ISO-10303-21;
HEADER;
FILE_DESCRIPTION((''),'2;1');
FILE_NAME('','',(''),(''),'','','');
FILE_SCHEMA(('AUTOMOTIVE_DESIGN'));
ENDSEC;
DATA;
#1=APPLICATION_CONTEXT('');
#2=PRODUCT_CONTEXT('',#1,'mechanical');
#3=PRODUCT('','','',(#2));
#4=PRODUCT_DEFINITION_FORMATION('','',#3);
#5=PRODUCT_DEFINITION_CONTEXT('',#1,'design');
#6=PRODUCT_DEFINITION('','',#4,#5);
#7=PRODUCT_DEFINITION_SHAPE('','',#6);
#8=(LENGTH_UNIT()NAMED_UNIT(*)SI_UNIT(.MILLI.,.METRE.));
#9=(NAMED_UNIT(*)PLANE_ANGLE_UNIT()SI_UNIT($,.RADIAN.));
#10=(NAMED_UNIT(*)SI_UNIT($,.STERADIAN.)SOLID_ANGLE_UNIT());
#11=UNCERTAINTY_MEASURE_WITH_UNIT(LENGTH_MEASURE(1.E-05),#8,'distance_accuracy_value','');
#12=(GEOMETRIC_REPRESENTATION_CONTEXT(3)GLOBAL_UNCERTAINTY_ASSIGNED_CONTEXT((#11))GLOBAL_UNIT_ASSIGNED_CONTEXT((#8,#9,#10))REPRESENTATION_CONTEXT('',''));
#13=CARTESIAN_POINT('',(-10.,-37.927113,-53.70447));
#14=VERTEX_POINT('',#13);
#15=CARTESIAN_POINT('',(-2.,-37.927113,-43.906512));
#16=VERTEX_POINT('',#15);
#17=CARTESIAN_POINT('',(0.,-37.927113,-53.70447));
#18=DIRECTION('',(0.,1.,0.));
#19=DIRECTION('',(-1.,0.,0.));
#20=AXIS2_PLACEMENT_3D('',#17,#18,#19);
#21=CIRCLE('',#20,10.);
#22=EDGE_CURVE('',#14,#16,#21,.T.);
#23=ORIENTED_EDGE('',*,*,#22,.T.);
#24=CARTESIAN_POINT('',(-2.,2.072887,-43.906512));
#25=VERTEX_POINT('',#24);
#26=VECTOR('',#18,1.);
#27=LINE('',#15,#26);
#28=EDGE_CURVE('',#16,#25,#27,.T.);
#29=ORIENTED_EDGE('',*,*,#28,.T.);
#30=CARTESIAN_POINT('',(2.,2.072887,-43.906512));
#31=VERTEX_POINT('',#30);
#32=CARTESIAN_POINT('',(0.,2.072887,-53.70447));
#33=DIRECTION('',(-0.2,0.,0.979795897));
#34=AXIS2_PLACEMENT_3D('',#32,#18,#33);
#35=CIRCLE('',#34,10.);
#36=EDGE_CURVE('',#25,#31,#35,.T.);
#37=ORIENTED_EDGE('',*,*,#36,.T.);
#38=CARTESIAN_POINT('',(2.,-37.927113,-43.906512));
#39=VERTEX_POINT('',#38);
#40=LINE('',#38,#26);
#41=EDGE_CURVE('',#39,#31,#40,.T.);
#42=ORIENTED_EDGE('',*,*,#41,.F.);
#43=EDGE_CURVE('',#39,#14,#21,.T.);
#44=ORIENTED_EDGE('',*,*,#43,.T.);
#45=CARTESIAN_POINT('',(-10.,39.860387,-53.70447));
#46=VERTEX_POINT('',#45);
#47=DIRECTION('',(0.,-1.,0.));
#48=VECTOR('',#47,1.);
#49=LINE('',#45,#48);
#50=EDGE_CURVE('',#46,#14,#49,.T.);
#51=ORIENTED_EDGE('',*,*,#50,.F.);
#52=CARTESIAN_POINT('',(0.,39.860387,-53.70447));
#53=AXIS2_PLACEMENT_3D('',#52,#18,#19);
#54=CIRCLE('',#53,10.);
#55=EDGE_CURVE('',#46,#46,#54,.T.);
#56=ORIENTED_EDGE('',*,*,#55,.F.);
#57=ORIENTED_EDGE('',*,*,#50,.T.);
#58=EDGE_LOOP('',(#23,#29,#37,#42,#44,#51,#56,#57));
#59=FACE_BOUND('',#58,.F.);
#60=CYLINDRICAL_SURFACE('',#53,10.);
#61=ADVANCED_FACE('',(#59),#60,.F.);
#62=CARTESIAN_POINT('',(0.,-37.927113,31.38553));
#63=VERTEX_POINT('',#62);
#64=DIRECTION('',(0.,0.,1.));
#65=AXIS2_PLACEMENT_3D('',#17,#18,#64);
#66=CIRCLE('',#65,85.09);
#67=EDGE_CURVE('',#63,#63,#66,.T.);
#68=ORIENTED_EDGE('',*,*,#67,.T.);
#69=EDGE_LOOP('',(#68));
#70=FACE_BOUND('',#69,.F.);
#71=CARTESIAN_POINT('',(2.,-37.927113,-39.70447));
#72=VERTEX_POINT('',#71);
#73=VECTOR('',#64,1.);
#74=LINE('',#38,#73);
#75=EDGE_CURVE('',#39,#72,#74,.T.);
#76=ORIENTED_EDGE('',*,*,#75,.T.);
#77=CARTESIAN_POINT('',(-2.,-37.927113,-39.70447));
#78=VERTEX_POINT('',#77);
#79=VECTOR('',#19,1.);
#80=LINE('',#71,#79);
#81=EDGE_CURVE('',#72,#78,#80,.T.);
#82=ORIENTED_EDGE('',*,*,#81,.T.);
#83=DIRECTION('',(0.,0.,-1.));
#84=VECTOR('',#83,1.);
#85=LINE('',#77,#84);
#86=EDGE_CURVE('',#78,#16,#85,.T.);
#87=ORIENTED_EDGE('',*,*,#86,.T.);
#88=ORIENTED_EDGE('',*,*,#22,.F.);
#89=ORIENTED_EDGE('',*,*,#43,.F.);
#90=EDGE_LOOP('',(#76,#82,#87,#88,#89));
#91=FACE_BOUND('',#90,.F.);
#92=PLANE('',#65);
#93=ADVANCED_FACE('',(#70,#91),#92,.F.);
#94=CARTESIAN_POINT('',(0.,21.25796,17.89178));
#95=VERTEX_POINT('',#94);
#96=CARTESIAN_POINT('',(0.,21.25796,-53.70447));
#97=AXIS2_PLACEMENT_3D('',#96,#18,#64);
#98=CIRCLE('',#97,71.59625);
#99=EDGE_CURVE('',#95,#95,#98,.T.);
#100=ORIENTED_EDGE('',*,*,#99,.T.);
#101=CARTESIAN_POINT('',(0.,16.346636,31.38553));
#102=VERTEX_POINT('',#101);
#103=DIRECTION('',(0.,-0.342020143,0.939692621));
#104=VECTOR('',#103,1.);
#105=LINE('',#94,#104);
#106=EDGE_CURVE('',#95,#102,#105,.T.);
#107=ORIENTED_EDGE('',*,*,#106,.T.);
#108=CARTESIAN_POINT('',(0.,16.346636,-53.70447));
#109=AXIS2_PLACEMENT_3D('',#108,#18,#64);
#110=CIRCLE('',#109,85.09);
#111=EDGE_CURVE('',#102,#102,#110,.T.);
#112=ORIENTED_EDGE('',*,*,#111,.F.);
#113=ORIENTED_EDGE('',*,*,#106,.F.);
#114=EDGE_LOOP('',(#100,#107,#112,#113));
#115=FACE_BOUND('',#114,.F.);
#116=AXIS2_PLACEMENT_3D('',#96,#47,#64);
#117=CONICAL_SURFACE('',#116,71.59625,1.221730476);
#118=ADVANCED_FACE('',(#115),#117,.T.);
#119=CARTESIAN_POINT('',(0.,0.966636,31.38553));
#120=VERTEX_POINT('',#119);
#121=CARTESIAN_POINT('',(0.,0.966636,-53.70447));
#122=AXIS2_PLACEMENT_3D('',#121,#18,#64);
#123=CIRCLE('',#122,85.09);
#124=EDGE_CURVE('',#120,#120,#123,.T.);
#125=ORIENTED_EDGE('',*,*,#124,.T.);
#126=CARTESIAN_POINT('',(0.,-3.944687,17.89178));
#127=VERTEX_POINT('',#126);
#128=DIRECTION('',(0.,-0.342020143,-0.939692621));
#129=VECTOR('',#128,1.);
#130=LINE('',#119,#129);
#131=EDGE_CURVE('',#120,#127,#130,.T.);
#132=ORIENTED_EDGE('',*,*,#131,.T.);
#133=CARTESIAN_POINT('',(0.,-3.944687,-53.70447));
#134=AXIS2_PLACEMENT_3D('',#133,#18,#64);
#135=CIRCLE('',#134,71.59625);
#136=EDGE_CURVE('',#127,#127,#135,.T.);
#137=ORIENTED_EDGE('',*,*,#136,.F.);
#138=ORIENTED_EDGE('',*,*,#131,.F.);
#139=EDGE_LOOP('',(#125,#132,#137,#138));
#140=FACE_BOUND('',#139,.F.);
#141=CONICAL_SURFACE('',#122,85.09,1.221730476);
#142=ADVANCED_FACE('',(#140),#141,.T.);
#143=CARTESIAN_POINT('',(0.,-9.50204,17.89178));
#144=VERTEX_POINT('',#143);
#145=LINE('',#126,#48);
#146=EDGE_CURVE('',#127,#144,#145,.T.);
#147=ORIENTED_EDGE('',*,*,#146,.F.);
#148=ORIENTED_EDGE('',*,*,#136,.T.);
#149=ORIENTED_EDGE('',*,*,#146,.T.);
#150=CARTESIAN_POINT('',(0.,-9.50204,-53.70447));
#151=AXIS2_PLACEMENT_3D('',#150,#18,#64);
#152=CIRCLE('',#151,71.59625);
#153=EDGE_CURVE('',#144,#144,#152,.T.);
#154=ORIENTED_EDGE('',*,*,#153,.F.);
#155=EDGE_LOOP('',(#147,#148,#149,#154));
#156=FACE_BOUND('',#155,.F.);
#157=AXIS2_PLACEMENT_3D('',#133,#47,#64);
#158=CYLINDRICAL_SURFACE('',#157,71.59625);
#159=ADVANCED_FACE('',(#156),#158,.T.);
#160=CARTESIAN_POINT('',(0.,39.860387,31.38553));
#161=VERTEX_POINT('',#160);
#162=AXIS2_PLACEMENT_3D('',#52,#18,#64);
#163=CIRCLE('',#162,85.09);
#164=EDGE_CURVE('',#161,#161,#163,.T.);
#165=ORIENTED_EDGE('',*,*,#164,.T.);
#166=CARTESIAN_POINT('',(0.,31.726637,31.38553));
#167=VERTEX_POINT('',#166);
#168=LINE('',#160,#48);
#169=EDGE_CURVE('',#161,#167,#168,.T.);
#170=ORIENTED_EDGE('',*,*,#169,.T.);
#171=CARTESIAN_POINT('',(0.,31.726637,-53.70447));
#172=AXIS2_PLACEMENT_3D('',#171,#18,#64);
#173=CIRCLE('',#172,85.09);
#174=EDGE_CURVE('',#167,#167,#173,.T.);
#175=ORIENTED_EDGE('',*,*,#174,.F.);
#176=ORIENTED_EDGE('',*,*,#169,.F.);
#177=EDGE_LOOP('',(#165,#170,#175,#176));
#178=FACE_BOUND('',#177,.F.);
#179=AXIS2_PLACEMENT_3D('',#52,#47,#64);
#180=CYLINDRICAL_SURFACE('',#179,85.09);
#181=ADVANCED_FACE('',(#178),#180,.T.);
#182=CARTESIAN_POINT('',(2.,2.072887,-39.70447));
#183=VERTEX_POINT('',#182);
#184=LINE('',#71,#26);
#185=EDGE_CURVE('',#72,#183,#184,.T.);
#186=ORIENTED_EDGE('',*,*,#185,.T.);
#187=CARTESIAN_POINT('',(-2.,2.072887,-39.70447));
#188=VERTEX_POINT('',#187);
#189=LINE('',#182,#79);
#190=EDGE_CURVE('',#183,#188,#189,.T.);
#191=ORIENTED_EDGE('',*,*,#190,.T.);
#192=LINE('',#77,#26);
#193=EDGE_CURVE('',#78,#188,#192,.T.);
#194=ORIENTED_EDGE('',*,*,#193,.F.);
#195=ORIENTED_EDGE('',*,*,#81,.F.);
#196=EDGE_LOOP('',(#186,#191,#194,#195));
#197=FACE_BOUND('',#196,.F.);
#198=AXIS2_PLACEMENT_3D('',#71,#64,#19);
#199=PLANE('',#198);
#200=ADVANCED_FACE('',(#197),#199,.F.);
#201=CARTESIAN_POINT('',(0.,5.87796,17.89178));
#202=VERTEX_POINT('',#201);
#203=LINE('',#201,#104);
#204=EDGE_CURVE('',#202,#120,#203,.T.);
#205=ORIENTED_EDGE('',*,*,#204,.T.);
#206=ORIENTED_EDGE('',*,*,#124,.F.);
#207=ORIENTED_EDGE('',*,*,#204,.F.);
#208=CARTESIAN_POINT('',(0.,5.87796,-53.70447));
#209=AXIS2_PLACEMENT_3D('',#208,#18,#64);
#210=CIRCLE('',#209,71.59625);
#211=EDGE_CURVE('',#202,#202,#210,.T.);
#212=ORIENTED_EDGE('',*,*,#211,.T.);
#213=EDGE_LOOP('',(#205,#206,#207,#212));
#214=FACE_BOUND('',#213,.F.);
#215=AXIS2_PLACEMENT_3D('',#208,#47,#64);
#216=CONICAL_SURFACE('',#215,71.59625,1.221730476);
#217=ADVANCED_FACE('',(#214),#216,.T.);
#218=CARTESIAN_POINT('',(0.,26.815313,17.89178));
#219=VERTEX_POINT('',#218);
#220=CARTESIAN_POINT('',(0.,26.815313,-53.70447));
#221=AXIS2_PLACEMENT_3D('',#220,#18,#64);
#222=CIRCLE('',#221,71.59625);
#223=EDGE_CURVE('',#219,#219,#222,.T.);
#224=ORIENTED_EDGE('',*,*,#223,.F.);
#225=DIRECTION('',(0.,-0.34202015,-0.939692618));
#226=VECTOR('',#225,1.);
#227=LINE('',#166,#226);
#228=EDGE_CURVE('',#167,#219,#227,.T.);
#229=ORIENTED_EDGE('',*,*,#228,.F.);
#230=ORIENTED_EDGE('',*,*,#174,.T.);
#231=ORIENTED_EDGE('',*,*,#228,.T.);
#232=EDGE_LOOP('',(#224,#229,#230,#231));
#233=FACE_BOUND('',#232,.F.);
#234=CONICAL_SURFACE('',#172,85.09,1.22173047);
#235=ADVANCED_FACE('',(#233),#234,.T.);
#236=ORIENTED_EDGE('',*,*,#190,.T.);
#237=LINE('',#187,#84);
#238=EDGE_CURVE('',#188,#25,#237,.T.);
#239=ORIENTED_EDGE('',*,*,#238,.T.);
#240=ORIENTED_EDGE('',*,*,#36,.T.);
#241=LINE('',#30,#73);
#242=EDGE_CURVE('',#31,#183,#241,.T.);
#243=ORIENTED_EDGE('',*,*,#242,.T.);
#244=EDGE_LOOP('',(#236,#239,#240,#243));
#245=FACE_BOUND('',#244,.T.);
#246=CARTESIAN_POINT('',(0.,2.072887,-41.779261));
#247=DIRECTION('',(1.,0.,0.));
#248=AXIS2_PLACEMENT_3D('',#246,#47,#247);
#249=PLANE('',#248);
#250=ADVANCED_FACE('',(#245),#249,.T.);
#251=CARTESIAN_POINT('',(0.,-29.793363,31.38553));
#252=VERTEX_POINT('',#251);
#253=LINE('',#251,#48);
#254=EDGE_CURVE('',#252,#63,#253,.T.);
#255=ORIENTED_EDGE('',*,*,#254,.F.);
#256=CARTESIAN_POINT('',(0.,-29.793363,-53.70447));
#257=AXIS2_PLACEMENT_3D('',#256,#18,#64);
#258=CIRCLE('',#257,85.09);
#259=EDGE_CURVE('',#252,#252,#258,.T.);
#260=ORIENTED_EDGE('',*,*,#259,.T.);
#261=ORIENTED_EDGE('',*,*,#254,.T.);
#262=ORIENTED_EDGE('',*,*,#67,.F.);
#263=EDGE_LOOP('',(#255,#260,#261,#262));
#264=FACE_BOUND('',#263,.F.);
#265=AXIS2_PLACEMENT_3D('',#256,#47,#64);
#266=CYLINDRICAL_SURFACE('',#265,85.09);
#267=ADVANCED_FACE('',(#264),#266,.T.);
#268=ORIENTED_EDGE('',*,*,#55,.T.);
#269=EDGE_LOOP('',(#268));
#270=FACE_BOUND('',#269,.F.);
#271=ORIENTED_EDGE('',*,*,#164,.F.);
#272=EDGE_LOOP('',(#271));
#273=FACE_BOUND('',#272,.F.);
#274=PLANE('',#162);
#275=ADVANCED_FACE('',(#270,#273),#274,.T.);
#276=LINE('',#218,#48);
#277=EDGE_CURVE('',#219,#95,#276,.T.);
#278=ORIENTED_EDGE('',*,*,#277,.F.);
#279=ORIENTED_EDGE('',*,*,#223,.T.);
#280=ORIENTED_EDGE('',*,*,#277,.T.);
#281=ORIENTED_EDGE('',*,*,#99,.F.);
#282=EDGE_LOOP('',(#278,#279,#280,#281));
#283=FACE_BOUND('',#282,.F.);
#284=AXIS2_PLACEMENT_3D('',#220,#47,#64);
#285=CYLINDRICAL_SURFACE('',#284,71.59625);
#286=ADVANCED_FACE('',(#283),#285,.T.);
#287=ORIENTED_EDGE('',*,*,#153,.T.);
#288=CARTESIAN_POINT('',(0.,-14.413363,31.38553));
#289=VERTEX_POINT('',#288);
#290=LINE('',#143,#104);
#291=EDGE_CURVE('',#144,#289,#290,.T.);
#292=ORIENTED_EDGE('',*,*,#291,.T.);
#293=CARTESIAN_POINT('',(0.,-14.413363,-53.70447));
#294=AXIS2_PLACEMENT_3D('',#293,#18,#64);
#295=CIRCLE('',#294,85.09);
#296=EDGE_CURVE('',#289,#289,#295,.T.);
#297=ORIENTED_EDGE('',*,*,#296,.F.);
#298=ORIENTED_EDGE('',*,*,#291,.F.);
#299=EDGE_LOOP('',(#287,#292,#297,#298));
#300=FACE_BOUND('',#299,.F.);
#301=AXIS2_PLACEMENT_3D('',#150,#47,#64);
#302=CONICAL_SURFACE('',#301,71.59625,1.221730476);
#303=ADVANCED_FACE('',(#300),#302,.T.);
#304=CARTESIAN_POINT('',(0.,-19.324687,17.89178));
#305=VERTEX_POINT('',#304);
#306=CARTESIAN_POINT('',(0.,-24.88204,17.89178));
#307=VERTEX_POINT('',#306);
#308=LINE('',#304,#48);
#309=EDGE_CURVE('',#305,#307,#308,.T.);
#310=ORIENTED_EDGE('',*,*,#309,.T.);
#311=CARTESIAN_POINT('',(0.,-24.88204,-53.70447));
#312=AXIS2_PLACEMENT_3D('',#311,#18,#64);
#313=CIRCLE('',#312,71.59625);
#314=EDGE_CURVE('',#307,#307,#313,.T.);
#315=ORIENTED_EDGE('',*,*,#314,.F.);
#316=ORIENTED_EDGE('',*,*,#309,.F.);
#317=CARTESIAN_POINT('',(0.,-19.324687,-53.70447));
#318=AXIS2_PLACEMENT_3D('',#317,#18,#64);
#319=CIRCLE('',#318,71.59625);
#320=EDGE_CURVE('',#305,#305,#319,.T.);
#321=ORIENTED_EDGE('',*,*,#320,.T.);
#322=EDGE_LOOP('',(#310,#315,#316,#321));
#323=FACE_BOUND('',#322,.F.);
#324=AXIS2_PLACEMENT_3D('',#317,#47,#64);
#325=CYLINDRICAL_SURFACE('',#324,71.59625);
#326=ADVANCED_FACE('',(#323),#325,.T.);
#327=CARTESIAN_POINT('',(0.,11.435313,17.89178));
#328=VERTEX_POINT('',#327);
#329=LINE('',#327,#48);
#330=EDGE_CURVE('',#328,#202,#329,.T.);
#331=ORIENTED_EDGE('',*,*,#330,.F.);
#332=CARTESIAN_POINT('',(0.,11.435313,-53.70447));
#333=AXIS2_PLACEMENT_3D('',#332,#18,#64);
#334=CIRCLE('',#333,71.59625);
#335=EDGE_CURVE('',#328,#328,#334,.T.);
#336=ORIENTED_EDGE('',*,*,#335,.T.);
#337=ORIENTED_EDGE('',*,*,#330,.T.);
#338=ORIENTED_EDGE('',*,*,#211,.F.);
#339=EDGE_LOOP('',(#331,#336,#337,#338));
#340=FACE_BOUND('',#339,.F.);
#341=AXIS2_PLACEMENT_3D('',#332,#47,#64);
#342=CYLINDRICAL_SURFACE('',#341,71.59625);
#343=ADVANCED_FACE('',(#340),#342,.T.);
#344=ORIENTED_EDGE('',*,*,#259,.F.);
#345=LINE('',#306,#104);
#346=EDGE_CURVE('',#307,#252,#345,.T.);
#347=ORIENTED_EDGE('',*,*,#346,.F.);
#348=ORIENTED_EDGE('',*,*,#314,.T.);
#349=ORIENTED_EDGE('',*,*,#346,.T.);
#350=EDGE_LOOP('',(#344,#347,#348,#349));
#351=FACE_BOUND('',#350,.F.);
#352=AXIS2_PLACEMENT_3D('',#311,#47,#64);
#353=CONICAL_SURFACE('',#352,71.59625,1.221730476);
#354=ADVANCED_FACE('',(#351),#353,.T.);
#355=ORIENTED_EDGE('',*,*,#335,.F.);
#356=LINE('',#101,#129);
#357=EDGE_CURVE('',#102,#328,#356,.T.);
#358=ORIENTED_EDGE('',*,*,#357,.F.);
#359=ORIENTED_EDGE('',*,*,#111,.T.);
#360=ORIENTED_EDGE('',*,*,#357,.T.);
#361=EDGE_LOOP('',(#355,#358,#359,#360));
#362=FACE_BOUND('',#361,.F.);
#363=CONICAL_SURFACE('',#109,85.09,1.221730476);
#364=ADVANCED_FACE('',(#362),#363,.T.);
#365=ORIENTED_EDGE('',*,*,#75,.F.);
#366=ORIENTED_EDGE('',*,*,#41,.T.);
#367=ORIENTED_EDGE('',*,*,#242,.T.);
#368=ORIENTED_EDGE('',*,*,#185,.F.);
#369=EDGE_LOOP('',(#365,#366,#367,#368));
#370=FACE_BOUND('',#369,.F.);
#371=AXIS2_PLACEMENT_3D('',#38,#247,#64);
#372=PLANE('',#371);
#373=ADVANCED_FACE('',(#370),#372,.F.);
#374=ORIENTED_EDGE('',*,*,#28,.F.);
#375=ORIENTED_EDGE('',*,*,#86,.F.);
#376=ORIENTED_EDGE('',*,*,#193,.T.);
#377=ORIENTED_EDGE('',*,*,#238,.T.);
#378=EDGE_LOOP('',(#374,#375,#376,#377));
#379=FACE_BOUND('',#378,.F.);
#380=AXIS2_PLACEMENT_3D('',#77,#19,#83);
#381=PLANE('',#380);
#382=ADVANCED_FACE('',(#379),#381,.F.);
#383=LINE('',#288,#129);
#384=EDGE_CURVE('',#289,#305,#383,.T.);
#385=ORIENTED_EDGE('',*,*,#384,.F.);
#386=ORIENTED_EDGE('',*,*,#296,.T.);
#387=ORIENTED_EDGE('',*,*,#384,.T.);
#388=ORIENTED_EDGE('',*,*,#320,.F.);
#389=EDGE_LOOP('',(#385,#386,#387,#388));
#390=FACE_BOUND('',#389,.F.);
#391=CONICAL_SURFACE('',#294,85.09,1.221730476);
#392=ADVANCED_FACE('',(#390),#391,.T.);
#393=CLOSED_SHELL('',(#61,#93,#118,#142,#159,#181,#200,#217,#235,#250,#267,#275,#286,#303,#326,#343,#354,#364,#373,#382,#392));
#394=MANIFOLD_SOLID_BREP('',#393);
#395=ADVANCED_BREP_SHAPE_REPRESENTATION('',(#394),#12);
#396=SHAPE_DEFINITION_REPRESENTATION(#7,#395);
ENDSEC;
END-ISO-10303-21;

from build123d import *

# Parameters (mm, degrees)
F2_R     = 10
F3_DEPTH = 77.978
F5_DEPTH = 40


# Not quite as in the source:
# - ends of sketch curves that miss each other by under 0.0002 mm in the source are joined


with BuildPart() as f1:
    # F0 (on Right) → F1 (revolve)
    with BuildSketch(Plane.YZ):
        Polygon((-29.7933634734, 31.385529514), (-37.9271134734, 31.385529514), (-37.9271134734, -53.704470486), (-29.7933634734, -53.704470486), (31.7266365266, -53.704470486), (39.8603865266, -53.704470486), (39.8603865266, 31.385529514), (31.7266365266, 31.385529514), (26.815313074, 17.891779514), (21.2579597972, 17.891779514), (16.3466364486, 31.385529514), (11.4353131, 17.891779514), (5.8779598232, 17.891779514), (0.9666364746, 31.385529514), (-3.944686874, 17.891779514), (-9.5020401508, 17.891779514), (-14.4133634994, 31.385529514), (-19.324686848, 17.891779514), (-24.8820401248, 17.891779514), align=None)
    revolve(axis=Axis((0, 0.9666365266, -53.704470486), (0, 1, 0)))

    # F2 (on face) → F3 (cut)
    with BuildSketch(Plane(origin=(0, 39.8603865266, 0), x_dir=(-1, 0, 0), z_dir=(0, 1, 0))):
        with Locations((0, -53.704470486)):
            Circle(F2_R)
    extrude(amount=-F3_DEPTH, mode=Mode.SUBTRACT)

    # F4 (on face) → F5 (cut)
    with BuildSketch(Plane.XZ.offset(37.9271134734)):
        with BuildLine():
            Line((2, -39.704470486), (0, -39.704470486))
            Line((0, -39.704470486), (-2, -39.704470486))
            Line((-2, -39.704470486), (-2, -43.9065115149))
            ThreePointArc((-2, -43.9065115149), (0, -43.704470486), (2, -43.9065115149))
            Line((2, -43.9065115149), (2, -39.704470486))
        make_face()
    extrude(amount=-F5_DEPTH, mode=Mode.SUBTRACT)


solid = f1.part
